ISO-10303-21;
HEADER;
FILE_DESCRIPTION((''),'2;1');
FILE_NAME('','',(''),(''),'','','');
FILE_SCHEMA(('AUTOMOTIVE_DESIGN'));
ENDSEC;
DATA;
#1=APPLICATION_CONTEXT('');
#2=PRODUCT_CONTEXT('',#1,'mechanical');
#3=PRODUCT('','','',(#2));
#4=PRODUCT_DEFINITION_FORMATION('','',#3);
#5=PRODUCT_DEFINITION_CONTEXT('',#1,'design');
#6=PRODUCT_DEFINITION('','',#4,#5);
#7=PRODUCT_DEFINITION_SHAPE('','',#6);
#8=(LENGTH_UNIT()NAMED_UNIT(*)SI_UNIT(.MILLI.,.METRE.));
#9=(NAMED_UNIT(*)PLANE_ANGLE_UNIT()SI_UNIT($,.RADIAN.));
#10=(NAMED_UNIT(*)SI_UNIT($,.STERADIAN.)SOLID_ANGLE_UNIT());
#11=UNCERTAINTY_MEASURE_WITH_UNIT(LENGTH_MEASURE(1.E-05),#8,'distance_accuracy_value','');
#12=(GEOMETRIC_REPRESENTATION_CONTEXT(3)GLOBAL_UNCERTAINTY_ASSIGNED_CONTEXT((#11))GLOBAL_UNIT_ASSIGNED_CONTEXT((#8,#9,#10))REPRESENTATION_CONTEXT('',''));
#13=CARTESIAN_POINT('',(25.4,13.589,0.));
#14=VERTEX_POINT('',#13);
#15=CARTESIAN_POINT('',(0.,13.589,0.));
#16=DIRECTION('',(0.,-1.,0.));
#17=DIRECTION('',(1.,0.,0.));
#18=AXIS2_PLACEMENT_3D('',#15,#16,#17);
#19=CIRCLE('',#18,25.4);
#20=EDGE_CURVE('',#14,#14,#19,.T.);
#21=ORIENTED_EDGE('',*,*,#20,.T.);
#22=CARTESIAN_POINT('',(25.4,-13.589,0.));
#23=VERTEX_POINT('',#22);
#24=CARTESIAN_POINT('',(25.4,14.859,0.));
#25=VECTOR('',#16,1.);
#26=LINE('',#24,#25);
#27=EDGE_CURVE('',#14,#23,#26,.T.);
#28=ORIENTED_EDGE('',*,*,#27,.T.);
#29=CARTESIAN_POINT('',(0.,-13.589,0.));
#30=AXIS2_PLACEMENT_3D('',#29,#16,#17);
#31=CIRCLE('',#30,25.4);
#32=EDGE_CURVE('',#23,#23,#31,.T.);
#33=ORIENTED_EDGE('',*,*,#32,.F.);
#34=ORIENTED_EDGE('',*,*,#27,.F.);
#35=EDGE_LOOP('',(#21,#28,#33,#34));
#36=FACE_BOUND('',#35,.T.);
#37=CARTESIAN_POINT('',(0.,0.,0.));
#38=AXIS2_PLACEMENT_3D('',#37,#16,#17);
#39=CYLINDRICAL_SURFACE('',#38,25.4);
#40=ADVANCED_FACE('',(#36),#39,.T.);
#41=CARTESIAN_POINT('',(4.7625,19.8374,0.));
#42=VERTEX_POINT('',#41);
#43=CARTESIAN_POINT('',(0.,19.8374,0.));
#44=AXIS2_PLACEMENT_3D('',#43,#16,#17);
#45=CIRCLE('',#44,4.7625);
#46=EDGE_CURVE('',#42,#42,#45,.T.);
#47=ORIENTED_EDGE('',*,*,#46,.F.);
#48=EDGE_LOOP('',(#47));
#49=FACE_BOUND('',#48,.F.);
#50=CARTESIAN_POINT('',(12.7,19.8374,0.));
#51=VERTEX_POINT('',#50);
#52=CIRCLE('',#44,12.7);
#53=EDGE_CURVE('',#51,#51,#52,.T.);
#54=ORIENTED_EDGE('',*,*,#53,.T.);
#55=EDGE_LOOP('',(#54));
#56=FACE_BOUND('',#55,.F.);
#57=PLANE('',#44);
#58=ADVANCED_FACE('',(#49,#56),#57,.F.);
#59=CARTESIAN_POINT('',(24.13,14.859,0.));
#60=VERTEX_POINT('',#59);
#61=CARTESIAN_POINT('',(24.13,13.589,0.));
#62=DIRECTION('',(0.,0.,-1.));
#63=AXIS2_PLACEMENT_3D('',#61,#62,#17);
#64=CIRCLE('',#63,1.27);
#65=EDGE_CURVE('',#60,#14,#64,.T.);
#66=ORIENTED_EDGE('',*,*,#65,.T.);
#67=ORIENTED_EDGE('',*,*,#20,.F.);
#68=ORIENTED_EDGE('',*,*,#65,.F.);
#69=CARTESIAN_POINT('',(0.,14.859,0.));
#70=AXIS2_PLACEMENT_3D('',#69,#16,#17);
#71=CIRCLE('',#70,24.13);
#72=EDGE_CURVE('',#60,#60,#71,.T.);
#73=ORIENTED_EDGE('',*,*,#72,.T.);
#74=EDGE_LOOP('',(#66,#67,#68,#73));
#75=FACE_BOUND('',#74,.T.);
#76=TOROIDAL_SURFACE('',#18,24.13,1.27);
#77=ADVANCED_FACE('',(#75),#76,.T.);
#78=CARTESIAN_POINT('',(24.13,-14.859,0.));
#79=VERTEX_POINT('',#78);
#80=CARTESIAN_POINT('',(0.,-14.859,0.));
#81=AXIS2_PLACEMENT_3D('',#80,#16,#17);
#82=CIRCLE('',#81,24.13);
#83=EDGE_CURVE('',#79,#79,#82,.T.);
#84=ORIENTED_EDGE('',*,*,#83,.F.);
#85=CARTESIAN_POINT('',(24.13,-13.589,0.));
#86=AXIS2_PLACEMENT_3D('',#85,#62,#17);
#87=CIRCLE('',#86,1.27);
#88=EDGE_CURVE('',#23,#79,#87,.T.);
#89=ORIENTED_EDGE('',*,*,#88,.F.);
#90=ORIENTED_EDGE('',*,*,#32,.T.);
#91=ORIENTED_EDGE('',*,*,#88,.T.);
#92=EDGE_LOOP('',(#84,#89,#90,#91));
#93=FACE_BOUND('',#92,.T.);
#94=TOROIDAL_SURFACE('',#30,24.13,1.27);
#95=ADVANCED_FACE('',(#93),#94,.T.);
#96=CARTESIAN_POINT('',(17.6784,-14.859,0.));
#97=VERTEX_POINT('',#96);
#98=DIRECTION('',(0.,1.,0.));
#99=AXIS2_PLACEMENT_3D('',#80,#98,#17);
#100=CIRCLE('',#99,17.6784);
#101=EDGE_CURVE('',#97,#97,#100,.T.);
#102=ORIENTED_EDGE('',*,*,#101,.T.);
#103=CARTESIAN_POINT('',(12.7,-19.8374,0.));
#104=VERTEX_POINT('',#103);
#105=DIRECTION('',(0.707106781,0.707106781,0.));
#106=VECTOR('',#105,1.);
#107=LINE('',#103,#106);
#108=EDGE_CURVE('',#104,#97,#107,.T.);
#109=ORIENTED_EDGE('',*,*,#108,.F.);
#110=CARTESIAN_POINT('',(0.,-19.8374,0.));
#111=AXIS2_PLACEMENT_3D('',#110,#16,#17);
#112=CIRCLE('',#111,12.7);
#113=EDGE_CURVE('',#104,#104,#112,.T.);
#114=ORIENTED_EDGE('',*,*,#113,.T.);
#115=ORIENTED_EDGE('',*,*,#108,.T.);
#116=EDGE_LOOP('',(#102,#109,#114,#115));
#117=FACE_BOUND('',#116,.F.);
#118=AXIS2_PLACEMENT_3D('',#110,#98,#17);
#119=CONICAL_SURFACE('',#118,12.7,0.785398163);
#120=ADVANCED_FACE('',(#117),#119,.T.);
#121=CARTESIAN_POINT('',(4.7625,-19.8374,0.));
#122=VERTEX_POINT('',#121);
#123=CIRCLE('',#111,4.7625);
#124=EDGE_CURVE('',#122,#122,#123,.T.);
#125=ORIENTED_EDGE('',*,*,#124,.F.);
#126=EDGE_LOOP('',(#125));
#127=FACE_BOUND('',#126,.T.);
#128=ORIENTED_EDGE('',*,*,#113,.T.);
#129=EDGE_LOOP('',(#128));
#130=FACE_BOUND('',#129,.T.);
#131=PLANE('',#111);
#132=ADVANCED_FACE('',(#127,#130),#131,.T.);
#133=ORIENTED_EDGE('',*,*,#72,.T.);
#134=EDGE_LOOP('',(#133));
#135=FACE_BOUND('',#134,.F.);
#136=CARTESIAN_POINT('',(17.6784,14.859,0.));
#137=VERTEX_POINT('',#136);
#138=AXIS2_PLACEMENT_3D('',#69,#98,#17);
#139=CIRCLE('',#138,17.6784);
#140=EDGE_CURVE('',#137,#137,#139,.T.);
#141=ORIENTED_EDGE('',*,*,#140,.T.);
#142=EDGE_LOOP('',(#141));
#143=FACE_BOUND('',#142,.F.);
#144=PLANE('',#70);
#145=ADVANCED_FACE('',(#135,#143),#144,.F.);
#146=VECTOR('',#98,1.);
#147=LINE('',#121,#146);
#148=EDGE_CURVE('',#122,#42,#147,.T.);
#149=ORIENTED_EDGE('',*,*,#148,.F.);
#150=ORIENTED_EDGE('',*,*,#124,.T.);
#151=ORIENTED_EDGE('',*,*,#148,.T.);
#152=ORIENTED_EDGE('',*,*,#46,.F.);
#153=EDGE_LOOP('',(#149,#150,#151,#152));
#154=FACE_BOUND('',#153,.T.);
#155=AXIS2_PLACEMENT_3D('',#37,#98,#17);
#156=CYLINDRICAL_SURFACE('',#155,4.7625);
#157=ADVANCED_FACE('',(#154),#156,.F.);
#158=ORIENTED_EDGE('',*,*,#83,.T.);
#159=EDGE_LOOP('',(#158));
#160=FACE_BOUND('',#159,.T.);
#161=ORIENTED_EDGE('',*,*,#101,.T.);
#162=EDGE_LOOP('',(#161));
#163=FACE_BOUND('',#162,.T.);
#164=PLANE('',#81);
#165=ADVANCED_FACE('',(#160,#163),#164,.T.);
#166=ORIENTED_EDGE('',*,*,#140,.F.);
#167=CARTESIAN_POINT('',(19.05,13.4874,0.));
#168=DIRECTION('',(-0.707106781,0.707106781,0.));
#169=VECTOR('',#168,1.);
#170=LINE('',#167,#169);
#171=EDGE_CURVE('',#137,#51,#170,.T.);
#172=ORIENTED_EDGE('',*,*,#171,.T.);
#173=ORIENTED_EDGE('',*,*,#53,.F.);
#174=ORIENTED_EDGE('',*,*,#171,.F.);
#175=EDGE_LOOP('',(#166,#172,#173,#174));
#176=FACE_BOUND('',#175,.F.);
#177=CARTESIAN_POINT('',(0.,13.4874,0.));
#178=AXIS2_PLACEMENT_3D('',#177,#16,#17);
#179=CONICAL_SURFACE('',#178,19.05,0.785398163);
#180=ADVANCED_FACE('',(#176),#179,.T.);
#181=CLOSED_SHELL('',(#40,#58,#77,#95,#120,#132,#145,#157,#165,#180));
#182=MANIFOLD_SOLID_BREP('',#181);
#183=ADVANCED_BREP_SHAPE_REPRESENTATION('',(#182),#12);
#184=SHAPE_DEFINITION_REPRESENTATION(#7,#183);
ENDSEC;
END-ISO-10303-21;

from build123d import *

# Parameters (mm, degrees)
F0_R     = 19.05
F0_R_2   = 4.7625
F1_DEPTH = 19.8374
F0_R_3   = 25.4
F2_DEPTH = 14.859
F4_R     = 1.27


# Not quite as in the source:
# - a fillet or chamfer that OpenCascade refuses, or shapes differently, is made with other operations: its cross-section is extruded or revolved along the edge and cut away or added


with BuildPart() as f1:
    # F0 (on Front) → F1 (new body, symmetric)
    with BuildSketch(Plane.XZ):
        Circle(F0_R)
        Circle(F0_R_2, mode=Mode.SUBTRACT)
    extrude(amount=F1_DEPTH, both=True)

    # F0 (on Front) → F2 (join, symmetric)
    with BuildSketch(Plane.XZ):
        Circle(F0_R_3)
        Circle(F0_R, mode=Mode.SUBTRACT)
    extrude(amount=F2_DEPTH, both=True)

    # F3: chamfer of 6.35 on 2 edges, made by hand


with BuildPart() as f3_tool2:
    # F3_s3 → F3_t4 (revolve)
    with BuildSketch(Plane.XY):
        Polygon((12.7, -19.8374), (19.05, -13.4874), (19.05, -19.8374), align=None)
    revolve(axis=Axis((0, -19.8374, 0), (0, -1, 0)))

    split(bisect_by=Plane.XZ.offset(14.859), keep=Keep.TOP)


with BuildPart() as f1_1:
    add(f1.part)

    # F3_t1: cut F3_tool2
    add(f3_tool2.part, mode=Mode.SUBTRACT)


with BuildPart() as f3_tool7:
    # F3_s8 → F3_t9 (revolve)
    with BuildSketch(Plane.XY):
        Polygon((19.05, 13.4874), (12.7, 19.8374), (19.05, 19.8374), align=None)
    revolve(axis=Axis((0, 19.8374, 0), (0, -1, 0)))

    split(bisect_by=Plane.XZ.offset(-14.859), keep=Keep.BOTTOM)


with BuildPart() as f1_2:
    add(f1_1.part)

    # F3_t6: cut F3_tool7
    add(f3_tool7.part, mode=Mode.SUBTRACT)

    # F4
    f4_edges = [f1_2.edges().sort_by_distance(p)[0] for p in [
        (-25.4, -14.859, 0),
        (-25.4, 14.859, 0),
    ]]
    fillet(f4_edges, radius=F4_R)


solid = f1_2.part
